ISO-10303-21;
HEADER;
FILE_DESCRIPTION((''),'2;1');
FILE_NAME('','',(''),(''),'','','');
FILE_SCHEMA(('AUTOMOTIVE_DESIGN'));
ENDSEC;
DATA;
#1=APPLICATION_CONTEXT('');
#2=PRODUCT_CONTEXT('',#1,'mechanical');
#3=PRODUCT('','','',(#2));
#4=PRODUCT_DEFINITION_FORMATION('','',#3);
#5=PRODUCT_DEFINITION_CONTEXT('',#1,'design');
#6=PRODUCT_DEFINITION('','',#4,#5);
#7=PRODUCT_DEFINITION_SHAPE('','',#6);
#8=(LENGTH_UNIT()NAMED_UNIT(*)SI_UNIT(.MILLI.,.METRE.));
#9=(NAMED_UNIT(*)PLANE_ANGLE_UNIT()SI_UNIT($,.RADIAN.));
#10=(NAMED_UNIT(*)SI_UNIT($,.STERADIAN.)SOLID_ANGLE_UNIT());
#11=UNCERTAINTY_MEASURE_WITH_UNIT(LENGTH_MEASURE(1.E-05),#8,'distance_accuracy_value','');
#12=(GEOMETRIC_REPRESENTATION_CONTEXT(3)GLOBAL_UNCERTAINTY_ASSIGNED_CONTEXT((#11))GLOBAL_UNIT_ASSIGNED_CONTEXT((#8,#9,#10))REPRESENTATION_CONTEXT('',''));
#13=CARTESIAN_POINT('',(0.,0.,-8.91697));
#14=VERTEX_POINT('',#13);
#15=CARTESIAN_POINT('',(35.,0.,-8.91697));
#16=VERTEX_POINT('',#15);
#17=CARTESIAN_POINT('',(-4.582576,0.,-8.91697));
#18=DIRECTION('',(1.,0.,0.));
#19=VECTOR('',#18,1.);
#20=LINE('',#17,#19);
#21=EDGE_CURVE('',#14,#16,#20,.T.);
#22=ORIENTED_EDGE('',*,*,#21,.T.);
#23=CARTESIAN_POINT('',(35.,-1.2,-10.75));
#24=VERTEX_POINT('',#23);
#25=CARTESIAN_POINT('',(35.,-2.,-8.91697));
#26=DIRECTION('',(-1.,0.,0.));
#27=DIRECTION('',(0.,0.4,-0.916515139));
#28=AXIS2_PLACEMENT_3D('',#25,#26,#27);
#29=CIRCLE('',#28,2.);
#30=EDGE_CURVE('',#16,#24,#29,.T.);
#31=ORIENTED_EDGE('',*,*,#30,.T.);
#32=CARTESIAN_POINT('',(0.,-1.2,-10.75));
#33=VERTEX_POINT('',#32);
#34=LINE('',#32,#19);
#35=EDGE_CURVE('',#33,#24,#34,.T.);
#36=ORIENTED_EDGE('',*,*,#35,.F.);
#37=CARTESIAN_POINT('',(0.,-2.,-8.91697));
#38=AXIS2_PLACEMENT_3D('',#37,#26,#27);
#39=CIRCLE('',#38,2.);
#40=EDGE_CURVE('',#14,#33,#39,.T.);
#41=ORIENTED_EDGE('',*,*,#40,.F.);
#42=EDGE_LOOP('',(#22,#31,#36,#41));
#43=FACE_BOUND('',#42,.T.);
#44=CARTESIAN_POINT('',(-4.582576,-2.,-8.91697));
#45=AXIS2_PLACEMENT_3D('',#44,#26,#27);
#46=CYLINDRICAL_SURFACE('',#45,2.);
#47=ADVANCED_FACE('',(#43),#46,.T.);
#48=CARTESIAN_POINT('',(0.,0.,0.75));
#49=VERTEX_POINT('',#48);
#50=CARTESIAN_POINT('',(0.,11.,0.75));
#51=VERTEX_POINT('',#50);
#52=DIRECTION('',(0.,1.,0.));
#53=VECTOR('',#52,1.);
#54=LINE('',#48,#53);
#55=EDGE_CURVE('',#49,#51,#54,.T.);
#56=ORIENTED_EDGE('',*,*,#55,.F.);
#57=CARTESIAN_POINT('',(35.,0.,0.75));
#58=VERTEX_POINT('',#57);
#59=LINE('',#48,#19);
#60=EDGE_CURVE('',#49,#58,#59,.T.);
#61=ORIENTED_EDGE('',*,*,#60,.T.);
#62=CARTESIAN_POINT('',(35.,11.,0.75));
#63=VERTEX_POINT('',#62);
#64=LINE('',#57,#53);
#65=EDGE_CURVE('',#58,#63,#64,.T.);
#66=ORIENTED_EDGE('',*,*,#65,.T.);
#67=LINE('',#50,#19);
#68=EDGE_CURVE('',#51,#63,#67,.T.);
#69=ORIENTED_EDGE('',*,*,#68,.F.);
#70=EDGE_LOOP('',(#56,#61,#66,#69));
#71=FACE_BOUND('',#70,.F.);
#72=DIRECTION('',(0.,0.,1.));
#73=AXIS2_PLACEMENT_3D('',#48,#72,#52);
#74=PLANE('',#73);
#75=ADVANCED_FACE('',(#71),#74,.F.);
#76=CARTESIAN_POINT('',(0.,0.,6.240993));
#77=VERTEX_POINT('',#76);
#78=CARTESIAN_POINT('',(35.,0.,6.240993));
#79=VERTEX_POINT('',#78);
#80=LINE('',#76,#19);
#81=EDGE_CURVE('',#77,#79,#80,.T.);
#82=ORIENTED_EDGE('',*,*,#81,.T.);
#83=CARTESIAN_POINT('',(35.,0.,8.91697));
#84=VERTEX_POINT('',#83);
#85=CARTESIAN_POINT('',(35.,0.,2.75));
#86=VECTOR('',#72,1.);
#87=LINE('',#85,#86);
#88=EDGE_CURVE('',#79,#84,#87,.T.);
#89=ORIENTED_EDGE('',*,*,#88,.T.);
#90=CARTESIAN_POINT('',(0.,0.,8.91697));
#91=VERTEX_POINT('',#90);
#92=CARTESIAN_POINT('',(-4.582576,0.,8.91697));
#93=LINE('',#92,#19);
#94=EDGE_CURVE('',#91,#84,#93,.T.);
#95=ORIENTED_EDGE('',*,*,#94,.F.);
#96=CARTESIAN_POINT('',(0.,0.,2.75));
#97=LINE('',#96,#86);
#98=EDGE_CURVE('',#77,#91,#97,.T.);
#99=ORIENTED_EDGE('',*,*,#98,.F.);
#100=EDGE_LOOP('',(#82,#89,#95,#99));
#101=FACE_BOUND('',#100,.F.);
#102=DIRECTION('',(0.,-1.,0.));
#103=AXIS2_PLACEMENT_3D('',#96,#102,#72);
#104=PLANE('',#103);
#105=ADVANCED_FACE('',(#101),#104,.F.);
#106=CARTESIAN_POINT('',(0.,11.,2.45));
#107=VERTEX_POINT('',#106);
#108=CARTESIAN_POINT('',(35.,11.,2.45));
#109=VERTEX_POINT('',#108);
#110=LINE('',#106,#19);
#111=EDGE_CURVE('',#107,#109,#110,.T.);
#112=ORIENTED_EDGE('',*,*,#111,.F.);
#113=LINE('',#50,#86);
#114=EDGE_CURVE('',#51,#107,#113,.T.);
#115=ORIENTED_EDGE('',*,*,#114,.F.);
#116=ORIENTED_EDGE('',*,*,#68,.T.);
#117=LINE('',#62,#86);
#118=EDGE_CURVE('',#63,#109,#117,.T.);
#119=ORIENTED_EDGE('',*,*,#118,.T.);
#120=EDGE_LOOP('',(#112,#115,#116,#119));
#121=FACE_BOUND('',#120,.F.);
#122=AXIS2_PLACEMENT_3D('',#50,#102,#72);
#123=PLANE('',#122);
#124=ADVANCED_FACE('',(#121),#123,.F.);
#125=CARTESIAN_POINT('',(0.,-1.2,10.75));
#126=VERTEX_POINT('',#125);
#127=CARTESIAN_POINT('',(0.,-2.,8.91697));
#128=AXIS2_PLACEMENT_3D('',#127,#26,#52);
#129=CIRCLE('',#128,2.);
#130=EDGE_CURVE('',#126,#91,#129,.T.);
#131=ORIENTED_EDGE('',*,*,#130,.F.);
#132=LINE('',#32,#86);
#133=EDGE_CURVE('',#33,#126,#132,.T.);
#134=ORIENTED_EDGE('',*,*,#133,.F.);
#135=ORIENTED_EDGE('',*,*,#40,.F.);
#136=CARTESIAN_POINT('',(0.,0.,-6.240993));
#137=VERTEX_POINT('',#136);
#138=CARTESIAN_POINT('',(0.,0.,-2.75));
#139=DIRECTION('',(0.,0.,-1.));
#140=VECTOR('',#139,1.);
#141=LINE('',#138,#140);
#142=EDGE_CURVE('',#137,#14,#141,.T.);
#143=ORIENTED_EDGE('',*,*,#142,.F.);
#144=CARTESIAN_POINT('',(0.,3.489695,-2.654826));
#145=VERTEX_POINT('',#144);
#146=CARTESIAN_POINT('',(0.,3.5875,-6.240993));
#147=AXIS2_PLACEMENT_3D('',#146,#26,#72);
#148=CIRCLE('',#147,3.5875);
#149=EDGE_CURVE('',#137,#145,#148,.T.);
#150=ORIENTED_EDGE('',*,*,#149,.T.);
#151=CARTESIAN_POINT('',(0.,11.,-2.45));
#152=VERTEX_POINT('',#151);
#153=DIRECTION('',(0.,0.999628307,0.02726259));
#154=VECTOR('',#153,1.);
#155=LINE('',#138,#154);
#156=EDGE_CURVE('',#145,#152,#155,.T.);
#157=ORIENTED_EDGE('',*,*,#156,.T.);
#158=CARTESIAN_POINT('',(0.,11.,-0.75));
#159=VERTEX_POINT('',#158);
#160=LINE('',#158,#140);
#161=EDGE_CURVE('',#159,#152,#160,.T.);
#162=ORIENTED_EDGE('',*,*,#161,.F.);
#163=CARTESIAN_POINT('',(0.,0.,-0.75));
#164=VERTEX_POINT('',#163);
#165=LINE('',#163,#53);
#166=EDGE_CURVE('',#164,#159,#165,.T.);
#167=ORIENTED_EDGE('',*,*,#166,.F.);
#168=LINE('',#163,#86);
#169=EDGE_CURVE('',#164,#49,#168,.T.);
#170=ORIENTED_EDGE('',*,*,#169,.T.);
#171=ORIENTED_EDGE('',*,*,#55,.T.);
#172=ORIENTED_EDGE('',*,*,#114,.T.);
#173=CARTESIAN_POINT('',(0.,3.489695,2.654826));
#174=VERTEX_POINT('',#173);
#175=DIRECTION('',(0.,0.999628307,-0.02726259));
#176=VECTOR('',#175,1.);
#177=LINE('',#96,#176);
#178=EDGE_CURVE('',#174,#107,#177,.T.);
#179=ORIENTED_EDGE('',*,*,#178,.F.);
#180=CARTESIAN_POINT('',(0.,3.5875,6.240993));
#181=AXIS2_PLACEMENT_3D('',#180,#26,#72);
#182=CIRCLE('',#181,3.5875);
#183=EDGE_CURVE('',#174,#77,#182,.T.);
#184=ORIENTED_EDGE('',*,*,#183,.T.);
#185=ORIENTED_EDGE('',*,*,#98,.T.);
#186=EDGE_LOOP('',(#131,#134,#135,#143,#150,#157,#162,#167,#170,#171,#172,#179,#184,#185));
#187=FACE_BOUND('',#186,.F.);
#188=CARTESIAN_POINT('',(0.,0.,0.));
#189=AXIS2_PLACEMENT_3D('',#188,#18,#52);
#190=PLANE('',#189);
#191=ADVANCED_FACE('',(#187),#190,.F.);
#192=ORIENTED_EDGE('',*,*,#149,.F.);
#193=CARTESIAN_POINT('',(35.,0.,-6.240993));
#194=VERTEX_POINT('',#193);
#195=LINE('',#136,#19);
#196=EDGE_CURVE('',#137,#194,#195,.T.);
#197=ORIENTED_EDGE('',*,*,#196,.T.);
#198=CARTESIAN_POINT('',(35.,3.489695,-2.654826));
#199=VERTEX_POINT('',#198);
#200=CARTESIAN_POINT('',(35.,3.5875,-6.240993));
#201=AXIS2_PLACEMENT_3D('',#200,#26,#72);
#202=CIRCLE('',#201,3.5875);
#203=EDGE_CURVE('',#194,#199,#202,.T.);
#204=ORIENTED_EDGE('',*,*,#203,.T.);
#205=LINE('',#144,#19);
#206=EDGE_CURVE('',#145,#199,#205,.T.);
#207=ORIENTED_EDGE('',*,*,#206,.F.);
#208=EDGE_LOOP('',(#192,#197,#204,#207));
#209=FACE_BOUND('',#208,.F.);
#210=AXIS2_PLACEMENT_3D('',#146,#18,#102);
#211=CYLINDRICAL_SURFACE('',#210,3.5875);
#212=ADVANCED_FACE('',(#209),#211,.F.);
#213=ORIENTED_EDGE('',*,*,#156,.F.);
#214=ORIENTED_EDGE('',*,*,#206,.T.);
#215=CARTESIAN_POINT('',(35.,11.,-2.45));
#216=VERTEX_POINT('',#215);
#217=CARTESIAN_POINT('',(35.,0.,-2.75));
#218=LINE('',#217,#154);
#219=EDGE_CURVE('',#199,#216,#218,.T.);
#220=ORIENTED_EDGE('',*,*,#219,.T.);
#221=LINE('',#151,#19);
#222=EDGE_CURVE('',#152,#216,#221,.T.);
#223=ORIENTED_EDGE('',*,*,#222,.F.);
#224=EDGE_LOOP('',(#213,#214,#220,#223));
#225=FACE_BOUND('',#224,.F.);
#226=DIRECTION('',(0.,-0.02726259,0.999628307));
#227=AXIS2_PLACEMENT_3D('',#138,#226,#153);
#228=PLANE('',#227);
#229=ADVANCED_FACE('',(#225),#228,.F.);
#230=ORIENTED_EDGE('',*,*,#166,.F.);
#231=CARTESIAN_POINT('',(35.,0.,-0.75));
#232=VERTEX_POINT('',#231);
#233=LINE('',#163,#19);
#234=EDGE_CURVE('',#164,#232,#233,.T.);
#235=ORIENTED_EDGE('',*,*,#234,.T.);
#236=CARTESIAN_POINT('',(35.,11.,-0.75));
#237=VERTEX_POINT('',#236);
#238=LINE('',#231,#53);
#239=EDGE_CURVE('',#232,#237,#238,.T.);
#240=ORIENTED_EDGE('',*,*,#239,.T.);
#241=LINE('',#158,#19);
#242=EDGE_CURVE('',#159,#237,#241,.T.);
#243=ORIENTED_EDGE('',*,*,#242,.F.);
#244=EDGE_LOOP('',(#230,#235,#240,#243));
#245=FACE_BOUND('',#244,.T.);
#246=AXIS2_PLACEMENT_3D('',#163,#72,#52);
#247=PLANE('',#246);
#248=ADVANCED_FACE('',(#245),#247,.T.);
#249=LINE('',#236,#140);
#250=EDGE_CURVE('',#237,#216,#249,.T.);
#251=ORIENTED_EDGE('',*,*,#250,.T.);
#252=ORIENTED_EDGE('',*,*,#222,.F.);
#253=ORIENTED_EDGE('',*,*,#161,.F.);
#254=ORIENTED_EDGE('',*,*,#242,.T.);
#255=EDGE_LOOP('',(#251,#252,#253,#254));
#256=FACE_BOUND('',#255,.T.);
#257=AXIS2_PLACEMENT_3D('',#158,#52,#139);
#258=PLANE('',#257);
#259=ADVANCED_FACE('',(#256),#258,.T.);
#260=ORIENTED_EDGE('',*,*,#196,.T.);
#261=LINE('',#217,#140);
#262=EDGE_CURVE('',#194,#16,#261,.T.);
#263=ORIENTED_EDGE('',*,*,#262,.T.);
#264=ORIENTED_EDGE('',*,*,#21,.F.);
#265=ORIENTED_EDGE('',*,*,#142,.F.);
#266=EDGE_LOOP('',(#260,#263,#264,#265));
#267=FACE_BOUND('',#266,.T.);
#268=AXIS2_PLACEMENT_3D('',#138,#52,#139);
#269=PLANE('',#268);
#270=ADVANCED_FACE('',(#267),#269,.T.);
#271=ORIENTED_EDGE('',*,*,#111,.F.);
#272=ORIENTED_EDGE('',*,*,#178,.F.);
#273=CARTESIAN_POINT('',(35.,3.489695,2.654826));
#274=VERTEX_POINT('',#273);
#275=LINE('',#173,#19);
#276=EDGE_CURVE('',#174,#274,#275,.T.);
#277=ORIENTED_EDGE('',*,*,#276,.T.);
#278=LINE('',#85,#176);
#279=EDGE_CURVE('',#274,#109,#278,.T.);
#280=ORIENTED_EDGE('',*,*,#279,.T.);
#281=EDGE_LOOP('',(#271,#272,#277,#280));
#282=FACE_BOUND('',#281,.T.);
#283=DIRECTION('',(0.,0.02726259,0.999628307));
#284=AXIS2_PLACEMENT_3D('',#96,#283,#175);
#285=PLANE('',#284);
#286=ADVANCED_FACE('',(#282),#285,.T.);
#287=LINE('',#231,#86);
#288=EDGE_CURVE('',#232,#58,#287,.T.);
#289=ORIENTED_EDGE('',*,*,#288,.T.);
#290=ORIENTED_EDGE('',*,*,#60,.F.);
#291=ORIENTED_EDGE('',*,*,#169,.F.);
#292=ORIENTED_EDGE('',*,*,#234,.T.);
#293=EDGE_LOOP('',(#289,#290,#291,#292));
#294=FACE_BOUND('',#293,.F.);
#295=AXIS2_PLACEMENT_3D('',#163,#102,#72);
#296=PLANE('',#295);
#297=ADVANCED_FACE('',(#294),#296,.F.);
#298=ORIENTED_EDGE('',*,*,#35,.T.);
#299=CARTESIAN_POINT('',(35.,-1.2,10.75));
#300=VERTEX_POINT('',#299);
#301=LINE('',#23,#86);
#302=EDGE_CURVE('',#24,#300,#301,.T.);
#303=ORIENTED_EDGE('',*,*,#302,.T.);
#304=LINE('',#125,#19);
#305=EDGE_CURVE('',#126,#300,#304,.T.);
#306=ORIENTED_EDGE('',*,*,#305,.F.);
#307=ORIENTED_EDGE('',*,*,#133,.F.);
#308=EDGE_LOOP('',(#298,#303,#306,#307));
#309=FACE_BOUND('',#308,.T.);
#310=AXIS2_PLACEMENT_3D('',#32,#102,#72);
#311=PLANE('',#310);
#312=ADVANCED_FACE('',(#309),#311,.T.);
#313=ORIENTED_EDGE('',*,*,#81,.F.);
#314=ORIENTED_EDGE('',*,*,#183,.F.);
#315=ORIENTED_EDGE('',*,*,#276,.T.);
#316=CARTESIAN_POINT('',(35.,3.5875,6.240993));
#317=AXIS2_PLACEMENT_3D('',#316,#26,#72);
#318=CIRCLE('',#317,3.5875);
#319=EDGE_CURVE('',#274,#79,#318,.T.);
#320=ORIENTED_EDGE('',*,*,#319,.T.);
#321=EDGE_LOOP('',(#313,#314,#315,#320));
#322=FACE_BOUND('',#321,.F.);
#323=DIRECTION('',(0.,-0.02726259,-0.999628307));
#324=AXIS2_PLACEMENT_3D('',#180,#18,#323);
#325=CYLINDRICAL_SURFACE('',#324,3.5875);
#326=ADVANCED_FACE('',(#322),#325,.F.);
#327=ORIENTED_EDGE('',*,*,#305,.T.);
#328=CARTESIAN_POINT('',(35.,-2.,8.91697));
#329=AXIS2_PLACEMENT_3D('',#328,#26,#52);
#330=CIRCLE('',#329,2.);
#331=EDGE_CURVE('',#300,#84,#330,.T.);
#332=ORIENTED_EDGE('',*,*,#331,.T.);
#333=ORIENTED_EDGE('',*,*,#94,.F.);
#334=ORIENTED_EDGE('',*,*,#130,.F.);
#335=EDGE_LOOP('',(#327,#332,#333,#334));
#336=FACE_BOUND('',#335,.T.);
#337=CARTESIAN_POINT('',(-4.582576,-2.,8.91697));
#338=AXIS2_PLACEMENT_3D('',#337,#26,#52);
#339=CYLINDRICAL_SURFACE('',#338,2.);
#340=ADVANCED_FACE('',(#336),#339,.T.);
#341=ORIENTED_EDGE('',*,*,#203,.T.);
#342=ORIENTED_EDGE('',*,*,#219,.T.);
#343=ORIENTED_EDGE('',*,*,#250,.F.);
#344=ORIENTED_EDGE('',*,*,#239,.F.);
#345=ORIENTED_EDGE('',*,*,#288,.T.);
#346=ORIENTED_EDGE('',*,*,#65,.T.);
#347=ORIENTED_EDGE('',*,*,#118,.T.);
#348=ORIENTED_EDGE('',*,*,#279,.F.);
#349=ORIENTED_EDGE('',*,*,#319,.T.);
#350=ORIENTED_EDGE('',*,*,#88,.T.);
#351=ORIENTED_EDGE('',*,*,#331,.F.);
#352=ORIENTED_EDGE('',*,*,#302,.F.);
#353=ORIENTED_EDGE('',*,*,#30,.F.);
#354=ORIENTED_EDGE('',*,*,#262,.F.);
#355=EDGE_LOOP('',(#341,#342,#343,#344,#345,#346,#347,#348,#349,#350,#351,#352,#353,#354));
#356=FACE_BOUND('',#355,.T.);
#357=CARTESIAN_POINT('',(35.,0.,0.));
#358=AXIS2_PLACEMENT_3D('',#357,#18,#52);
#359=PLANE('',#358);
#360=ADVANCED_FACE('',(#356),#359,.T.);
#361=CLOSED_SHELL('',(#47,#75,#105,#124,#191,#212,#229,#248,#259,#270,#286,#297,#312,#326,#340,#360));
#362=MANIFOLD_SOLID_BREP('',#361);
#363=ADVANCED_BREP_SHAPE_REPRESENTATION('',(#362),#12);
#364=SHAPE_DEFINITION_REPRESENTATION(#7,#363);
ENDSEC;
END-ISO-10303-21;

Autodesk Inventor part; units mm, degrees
ref_plane "YZ Plane" through (0, 0, 0) normal (1, 0, 0) x (0, 1, 0)
ref_plane "XZ Plane" through (0, 0, 0) normal (0, 1, 0) x (-1, 0, 0)
ref_plane "XY Plane" through (0, 0, 0) normal (0, 0, 1) x (1, 0, 0)
sketch "Sketch1" plane through (0, 0, 0) normal (1, 0, 0) x (0, 1, 0)
  line L0 (0, 0) -> (0, -0.75) construction
  line L1 (0, 0) -> (0, 0.75) construction
  line L2 (0, 0.75) -> (11, 0.75)
  line L3 (11, 0.75) -> (11, 2.45)
  line L4 (0, -0.75) -> (11, -0.75)
  line L5 (11, -0.75) -> (11, -2.45)
  line L6 (0, 0.75) -> (0, 2.75)
  line L7 (0, 2.75) -> (11, 2.45)
  line L8 (0, -0.75) -> (0, -2.75)
  line L9 (0, -2.75) -> (11, -2.45)
  line L10 (0, -0.75) -> (0, 0.75)
  line L11 (0, 2.75) -> (0, 10.75)
  line L12 (0, -2.75) -> (0, -10.75)
  line L13 (0, -2.75) -> (8, -2.75) construction
  line L14 (0, -10.75) -> (-1.2, -10.75)
  line L15 (-1.2, -10.75) -> (-1.2, 10.75)
  line L16 (-1.2, 10.75) -> (0, 10.75)
  dimension "d0" = 0.75
  dimension "d1" = 0.75
  dimension "d2" = 11
  dimension "d3" = 1.7
  dimension "d4" = 11
  dimension "d5" = 1.7
  dimension "d6" = 2
  dimension "d7" = 2
  dimension "d8" = 8
  dimension "d9" = 8
  dimension "d10" = 90
  dimension "d11" = 1.2
extrude "Extrusion1" add sketch "Sketch1" along normal blind 35
fillet "Fillet1" radius 3.5875 2 edges at (17.5, 0, 2.75) (17.5, 0, -2.75)
fillet "Fillet2" radius 2 2 edges at (17.5, 0, 10.75) (17.5, 0, -10.75)
properties part number "cleat bracket v1"
